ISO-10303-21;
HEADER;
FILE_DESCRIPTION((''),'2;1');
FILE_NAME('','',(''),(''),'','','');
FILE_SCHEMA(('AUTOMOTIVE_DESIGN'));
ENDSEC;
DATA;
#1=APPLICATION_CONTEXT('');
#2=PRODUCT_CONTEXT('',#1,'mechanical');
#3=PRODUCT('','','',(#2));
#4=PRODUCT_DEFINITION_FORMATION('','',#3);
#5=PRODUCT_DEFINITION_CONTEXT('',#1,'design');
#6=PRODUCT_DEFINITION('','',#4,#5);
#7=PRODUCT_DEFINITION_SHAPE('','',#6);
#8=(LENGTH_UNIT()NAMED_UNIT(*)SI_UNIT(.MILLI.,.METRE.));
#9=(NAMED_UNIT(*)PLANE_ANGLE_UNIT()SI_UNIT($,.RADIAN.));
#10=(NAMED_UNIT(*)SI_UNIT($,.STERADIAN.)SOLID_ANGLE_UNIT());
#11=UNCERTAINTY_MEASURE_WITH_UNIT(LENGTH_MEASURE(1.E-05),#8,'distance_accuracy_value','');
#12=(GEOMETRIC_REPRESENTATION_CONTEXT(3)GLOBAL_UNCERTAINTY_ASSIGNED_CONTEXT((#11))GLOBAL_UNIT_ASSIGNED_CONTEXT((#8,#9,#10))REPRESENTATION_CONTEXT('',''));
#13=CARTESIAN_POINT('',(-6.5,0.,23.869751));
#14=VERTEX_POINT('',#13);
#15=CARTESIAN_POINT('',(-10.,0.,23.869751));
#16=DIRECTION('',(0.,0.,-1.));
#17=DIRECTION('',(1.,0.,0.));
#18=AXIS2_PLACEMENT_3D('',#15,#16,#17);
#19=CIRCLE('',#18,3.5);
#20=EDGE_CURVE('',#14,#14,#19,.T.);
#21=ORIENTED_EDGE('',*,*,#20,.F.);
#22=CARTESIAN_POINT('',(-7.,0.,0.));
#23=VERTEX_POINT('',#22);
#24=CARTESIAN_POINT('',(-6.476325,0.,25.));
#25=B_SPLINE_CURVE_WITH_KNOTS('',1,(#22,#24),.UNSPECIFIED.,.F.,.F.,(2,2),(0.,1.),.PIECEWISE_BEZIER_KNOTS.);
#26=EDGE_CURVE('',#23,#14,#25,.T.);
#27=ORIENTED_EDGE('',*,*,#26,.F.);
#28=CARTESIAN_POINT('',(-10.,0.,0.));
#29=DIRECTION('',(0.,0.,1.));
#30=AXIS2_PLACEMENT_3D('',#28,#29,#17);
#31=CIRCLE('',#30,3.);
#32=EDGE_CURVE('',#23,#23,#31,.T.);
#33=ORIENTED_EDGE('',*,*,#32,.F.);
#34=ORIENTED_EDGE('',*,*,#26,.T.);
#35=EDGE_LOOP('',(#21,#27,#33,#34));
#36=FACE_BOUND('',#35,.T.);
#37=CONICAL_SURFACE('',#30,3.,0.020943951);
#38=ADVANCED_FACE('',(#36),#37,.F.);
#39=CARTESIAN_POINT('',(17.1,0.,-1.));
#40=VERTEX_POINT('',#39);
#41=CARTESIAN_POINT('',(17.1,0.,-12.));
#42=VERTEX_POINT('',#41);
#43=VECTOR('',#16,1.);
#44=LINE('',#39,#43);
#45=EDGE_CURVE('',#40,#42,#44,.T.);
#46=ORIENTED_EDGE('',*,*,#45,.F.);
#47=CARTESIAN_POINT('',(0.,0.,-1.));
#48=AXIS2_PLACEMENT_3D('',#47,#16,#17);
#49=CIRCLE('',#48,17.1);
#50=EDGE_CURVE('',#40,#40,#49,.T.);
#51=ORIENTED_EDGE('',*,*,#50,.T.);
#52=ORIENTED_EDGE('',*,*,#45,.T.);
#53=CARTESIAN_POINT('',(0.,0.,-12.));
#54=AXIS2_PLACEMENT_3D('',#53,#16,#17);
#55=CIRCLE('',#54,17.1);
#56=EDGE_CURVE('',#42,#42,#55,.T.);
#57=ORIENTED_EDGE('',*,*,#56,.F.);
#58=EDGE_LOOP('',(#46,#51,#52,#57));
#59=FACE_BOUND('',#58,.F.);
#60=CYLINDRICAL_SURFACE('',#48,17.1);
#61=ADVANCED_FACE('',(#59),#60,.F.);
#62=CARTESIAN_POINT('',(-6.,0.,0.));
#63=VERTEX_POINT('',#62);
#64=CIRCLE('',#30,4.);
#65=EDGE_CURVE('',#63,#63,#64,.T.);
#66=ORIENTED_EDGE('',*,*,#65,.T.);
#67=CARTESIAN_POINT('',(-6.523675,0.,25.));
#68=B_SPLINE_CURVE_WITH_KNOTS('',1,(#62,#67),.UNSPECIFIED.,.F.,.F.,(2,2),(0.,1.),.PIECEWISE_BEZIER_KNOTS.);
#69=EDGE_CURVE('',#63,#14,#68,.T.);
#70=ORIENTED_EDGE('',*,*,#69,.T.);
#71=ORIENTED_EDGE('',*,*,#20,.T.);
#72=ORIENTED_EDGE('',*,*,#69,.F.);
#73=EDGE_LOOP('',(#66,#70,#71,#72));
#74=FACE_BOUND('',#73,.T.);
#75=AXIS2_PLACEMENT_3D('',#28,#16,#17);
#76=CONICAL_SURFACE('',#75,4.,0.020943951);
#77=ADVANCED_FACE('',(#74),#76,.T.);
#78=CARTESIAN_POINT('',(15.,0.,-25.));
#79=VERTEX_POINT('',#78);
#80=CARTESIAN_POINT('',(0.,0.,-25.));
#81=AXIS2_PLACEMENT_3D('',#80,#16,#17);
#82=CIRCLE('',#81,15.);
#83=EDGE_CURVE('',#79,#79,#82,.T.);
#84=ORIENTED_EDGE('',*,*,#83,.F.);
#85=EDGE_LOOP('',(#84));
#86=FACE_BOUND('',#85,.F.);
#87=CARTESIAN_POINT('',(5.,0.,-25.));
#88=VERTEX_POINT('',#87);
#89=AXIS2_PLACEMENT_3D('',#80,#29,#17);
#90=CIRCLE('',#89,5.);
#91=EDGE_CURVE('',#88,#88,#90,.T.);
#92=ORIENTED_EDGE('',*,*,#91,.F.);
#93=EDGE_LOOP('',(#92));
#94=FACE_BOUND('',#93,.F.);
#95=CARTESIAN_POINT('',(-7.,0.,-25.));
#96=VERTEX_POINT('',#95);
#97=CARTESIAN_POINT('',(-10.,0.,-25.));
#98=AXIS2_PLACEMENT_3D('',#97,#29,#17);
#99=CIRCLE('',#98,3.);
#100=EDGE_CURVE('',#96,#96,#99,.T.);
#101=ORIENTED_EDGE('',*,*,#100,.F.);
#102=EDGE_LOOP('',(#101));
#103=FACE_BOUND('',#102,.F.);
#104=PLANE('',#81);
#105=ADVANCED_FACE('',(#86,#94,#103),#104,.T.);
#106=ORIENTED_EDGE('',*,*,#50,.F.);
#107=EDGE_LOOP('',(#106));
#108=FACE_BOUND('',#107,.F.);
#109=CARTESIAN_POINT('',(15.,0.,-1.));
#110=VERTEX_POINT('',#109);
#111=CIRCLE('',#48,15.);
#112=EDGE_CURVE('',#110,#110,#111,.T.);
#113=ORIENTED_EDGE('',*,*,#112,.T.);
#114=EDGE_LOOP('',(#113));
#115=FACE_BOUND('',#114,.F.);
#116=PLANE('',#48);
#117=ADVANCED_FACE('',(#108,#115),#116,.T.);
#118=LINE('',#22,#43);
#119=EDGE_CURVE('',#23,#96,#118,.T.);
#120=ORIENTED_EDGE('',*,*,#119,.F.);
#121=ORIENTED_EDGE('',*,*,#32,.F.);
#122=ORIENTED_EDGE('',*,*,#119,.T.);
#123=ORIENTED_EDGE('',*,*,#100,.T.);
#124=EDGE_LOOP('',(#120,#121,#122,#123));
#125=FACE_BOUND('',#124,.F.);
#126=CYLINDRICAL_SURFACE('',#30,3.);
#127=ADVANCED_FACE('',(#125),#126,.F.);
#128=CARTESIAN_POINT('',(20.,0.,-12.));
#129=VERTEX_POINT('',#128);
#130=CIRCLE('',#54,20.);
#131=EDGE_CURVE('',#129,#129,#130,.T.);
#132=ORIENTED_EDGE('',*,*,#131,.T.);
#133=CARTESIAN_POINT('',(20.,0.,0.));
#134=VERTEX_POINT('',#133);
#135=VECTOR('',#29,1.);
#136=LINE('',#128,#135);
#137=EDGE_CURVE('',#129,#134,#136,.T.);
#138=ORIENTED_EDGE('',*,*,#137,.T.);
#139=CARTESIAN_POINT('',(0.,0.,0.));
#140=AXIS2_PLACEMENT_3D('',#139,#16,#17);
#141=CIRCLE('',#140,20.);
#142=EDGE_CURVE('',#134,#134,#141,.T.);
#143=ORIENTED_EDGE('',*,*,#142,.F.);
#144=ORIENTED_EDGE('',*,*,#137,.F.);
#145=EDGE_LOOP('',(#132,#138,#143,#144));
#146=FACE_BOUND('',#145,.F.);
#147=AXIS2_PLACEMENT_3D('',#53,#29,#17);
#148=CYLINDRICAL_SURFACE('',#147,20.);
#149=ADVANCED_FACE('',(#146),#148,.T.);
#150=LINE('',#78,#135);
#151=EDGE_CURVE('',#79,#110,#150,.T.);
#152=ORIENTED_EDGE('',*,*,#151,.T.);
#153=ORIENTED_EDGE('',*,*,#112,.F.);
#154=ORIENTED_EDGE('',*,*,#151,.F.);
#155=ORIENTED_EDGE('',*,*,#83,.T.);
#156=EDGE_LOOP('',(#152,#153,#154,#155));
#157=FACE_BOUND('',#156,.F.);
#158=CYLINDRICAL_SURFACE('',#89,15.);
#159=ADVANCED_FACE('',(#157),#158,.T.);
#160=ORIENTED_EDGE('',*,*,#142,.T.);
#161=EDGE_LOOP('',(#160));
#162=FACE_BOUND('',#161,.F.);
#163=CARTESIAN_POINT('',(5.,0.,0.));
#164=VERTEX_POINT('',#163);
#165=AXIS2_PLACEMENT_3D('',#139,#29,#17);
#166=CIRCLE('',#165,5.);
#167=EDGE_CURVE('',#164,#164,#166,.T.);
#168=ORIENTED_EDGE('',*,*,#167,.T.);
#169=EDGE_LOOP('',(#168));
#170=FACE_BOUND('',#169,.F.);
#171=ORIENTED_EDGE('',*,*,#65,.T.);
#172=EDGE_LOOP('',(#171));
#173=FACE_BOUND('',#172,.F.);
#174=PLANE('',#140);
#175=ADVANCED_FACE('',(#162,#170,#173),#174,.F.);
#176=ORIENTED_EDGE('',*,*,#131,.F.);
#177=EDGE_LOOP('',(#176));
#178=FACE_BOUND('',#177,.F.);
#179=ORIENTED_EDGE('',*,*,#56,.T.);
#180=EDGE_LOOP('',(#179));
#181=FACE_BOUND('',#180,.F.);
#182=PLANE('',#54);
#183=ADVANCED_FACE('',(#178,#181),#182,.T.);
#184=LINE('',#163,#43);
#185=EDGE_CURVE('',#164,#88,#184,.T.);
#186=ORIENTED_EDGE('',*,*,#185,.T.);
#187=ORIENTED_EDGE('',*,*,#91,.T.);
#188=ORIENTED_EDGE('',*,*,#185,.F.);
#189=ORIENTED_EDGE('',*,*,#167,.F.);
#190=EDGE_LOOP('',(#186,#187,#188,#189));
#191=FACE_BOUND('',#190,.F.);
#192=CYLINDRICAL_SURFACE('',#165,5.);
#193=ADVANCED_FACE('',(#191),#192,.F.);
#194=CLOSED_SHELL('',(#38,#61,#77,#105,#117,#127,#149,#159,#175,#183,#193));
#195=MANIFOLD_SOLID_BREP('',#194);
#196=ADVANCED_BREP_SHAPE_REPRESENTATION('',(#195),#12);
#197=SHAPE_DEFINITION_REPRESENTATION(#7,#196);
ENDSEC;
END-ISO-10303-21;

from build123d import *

# Parameters (mm, degrees)
F2_R     = 5
F3_DEPTH = 25.001
F4_R     = 3
F5_DEPTH = 25.001
F6_R     = 4
F6_R_2   = 3
F7_DEPTH = 25
F7_TAPER = 1.2


with BuildPart() as f1:
    # F0 (on Front) → F1 (revolve)
    with BuildSketch(Plane.XZ):
        Polygon((20, 0), (0, 0), (0, -25), (15, -25), (15, -1), (17.1, -1), (17.1, -12), (20, -12), align=None)
    revolve(axis=Axis((0, 0, -20.7611778751), (0, 0, -1)))

    # F2 (on Top) → F3 (cut, through all)
    with BuildSketch(Plane.XY):
        Circle(F2_R)
    extrude(amount=-F3_DEPTH, mode=Mode.SUBTRACT)

    # F4 (on face) → F5 (cut, through all)
    with BuildSketch(Plane.XY):
        with Locations((-10, 0)):
            Circle(F4_R)
    extrude(amount=-F5_DEPTH, mode=Mode.SUBTRACT)

    # F6 (on face) → F7 (join)
    with BuildSketch(Plane.XY):
        with Locations((-10, 0)):
            Circle(F6_R)
        with Locations((-10, 0)):
            Circle(F6_R_2, mode=Mode.SUBTRACT)
    extrude(amount=F7_DEPTH, taper=F7_TAPER)


solid = f1.part
